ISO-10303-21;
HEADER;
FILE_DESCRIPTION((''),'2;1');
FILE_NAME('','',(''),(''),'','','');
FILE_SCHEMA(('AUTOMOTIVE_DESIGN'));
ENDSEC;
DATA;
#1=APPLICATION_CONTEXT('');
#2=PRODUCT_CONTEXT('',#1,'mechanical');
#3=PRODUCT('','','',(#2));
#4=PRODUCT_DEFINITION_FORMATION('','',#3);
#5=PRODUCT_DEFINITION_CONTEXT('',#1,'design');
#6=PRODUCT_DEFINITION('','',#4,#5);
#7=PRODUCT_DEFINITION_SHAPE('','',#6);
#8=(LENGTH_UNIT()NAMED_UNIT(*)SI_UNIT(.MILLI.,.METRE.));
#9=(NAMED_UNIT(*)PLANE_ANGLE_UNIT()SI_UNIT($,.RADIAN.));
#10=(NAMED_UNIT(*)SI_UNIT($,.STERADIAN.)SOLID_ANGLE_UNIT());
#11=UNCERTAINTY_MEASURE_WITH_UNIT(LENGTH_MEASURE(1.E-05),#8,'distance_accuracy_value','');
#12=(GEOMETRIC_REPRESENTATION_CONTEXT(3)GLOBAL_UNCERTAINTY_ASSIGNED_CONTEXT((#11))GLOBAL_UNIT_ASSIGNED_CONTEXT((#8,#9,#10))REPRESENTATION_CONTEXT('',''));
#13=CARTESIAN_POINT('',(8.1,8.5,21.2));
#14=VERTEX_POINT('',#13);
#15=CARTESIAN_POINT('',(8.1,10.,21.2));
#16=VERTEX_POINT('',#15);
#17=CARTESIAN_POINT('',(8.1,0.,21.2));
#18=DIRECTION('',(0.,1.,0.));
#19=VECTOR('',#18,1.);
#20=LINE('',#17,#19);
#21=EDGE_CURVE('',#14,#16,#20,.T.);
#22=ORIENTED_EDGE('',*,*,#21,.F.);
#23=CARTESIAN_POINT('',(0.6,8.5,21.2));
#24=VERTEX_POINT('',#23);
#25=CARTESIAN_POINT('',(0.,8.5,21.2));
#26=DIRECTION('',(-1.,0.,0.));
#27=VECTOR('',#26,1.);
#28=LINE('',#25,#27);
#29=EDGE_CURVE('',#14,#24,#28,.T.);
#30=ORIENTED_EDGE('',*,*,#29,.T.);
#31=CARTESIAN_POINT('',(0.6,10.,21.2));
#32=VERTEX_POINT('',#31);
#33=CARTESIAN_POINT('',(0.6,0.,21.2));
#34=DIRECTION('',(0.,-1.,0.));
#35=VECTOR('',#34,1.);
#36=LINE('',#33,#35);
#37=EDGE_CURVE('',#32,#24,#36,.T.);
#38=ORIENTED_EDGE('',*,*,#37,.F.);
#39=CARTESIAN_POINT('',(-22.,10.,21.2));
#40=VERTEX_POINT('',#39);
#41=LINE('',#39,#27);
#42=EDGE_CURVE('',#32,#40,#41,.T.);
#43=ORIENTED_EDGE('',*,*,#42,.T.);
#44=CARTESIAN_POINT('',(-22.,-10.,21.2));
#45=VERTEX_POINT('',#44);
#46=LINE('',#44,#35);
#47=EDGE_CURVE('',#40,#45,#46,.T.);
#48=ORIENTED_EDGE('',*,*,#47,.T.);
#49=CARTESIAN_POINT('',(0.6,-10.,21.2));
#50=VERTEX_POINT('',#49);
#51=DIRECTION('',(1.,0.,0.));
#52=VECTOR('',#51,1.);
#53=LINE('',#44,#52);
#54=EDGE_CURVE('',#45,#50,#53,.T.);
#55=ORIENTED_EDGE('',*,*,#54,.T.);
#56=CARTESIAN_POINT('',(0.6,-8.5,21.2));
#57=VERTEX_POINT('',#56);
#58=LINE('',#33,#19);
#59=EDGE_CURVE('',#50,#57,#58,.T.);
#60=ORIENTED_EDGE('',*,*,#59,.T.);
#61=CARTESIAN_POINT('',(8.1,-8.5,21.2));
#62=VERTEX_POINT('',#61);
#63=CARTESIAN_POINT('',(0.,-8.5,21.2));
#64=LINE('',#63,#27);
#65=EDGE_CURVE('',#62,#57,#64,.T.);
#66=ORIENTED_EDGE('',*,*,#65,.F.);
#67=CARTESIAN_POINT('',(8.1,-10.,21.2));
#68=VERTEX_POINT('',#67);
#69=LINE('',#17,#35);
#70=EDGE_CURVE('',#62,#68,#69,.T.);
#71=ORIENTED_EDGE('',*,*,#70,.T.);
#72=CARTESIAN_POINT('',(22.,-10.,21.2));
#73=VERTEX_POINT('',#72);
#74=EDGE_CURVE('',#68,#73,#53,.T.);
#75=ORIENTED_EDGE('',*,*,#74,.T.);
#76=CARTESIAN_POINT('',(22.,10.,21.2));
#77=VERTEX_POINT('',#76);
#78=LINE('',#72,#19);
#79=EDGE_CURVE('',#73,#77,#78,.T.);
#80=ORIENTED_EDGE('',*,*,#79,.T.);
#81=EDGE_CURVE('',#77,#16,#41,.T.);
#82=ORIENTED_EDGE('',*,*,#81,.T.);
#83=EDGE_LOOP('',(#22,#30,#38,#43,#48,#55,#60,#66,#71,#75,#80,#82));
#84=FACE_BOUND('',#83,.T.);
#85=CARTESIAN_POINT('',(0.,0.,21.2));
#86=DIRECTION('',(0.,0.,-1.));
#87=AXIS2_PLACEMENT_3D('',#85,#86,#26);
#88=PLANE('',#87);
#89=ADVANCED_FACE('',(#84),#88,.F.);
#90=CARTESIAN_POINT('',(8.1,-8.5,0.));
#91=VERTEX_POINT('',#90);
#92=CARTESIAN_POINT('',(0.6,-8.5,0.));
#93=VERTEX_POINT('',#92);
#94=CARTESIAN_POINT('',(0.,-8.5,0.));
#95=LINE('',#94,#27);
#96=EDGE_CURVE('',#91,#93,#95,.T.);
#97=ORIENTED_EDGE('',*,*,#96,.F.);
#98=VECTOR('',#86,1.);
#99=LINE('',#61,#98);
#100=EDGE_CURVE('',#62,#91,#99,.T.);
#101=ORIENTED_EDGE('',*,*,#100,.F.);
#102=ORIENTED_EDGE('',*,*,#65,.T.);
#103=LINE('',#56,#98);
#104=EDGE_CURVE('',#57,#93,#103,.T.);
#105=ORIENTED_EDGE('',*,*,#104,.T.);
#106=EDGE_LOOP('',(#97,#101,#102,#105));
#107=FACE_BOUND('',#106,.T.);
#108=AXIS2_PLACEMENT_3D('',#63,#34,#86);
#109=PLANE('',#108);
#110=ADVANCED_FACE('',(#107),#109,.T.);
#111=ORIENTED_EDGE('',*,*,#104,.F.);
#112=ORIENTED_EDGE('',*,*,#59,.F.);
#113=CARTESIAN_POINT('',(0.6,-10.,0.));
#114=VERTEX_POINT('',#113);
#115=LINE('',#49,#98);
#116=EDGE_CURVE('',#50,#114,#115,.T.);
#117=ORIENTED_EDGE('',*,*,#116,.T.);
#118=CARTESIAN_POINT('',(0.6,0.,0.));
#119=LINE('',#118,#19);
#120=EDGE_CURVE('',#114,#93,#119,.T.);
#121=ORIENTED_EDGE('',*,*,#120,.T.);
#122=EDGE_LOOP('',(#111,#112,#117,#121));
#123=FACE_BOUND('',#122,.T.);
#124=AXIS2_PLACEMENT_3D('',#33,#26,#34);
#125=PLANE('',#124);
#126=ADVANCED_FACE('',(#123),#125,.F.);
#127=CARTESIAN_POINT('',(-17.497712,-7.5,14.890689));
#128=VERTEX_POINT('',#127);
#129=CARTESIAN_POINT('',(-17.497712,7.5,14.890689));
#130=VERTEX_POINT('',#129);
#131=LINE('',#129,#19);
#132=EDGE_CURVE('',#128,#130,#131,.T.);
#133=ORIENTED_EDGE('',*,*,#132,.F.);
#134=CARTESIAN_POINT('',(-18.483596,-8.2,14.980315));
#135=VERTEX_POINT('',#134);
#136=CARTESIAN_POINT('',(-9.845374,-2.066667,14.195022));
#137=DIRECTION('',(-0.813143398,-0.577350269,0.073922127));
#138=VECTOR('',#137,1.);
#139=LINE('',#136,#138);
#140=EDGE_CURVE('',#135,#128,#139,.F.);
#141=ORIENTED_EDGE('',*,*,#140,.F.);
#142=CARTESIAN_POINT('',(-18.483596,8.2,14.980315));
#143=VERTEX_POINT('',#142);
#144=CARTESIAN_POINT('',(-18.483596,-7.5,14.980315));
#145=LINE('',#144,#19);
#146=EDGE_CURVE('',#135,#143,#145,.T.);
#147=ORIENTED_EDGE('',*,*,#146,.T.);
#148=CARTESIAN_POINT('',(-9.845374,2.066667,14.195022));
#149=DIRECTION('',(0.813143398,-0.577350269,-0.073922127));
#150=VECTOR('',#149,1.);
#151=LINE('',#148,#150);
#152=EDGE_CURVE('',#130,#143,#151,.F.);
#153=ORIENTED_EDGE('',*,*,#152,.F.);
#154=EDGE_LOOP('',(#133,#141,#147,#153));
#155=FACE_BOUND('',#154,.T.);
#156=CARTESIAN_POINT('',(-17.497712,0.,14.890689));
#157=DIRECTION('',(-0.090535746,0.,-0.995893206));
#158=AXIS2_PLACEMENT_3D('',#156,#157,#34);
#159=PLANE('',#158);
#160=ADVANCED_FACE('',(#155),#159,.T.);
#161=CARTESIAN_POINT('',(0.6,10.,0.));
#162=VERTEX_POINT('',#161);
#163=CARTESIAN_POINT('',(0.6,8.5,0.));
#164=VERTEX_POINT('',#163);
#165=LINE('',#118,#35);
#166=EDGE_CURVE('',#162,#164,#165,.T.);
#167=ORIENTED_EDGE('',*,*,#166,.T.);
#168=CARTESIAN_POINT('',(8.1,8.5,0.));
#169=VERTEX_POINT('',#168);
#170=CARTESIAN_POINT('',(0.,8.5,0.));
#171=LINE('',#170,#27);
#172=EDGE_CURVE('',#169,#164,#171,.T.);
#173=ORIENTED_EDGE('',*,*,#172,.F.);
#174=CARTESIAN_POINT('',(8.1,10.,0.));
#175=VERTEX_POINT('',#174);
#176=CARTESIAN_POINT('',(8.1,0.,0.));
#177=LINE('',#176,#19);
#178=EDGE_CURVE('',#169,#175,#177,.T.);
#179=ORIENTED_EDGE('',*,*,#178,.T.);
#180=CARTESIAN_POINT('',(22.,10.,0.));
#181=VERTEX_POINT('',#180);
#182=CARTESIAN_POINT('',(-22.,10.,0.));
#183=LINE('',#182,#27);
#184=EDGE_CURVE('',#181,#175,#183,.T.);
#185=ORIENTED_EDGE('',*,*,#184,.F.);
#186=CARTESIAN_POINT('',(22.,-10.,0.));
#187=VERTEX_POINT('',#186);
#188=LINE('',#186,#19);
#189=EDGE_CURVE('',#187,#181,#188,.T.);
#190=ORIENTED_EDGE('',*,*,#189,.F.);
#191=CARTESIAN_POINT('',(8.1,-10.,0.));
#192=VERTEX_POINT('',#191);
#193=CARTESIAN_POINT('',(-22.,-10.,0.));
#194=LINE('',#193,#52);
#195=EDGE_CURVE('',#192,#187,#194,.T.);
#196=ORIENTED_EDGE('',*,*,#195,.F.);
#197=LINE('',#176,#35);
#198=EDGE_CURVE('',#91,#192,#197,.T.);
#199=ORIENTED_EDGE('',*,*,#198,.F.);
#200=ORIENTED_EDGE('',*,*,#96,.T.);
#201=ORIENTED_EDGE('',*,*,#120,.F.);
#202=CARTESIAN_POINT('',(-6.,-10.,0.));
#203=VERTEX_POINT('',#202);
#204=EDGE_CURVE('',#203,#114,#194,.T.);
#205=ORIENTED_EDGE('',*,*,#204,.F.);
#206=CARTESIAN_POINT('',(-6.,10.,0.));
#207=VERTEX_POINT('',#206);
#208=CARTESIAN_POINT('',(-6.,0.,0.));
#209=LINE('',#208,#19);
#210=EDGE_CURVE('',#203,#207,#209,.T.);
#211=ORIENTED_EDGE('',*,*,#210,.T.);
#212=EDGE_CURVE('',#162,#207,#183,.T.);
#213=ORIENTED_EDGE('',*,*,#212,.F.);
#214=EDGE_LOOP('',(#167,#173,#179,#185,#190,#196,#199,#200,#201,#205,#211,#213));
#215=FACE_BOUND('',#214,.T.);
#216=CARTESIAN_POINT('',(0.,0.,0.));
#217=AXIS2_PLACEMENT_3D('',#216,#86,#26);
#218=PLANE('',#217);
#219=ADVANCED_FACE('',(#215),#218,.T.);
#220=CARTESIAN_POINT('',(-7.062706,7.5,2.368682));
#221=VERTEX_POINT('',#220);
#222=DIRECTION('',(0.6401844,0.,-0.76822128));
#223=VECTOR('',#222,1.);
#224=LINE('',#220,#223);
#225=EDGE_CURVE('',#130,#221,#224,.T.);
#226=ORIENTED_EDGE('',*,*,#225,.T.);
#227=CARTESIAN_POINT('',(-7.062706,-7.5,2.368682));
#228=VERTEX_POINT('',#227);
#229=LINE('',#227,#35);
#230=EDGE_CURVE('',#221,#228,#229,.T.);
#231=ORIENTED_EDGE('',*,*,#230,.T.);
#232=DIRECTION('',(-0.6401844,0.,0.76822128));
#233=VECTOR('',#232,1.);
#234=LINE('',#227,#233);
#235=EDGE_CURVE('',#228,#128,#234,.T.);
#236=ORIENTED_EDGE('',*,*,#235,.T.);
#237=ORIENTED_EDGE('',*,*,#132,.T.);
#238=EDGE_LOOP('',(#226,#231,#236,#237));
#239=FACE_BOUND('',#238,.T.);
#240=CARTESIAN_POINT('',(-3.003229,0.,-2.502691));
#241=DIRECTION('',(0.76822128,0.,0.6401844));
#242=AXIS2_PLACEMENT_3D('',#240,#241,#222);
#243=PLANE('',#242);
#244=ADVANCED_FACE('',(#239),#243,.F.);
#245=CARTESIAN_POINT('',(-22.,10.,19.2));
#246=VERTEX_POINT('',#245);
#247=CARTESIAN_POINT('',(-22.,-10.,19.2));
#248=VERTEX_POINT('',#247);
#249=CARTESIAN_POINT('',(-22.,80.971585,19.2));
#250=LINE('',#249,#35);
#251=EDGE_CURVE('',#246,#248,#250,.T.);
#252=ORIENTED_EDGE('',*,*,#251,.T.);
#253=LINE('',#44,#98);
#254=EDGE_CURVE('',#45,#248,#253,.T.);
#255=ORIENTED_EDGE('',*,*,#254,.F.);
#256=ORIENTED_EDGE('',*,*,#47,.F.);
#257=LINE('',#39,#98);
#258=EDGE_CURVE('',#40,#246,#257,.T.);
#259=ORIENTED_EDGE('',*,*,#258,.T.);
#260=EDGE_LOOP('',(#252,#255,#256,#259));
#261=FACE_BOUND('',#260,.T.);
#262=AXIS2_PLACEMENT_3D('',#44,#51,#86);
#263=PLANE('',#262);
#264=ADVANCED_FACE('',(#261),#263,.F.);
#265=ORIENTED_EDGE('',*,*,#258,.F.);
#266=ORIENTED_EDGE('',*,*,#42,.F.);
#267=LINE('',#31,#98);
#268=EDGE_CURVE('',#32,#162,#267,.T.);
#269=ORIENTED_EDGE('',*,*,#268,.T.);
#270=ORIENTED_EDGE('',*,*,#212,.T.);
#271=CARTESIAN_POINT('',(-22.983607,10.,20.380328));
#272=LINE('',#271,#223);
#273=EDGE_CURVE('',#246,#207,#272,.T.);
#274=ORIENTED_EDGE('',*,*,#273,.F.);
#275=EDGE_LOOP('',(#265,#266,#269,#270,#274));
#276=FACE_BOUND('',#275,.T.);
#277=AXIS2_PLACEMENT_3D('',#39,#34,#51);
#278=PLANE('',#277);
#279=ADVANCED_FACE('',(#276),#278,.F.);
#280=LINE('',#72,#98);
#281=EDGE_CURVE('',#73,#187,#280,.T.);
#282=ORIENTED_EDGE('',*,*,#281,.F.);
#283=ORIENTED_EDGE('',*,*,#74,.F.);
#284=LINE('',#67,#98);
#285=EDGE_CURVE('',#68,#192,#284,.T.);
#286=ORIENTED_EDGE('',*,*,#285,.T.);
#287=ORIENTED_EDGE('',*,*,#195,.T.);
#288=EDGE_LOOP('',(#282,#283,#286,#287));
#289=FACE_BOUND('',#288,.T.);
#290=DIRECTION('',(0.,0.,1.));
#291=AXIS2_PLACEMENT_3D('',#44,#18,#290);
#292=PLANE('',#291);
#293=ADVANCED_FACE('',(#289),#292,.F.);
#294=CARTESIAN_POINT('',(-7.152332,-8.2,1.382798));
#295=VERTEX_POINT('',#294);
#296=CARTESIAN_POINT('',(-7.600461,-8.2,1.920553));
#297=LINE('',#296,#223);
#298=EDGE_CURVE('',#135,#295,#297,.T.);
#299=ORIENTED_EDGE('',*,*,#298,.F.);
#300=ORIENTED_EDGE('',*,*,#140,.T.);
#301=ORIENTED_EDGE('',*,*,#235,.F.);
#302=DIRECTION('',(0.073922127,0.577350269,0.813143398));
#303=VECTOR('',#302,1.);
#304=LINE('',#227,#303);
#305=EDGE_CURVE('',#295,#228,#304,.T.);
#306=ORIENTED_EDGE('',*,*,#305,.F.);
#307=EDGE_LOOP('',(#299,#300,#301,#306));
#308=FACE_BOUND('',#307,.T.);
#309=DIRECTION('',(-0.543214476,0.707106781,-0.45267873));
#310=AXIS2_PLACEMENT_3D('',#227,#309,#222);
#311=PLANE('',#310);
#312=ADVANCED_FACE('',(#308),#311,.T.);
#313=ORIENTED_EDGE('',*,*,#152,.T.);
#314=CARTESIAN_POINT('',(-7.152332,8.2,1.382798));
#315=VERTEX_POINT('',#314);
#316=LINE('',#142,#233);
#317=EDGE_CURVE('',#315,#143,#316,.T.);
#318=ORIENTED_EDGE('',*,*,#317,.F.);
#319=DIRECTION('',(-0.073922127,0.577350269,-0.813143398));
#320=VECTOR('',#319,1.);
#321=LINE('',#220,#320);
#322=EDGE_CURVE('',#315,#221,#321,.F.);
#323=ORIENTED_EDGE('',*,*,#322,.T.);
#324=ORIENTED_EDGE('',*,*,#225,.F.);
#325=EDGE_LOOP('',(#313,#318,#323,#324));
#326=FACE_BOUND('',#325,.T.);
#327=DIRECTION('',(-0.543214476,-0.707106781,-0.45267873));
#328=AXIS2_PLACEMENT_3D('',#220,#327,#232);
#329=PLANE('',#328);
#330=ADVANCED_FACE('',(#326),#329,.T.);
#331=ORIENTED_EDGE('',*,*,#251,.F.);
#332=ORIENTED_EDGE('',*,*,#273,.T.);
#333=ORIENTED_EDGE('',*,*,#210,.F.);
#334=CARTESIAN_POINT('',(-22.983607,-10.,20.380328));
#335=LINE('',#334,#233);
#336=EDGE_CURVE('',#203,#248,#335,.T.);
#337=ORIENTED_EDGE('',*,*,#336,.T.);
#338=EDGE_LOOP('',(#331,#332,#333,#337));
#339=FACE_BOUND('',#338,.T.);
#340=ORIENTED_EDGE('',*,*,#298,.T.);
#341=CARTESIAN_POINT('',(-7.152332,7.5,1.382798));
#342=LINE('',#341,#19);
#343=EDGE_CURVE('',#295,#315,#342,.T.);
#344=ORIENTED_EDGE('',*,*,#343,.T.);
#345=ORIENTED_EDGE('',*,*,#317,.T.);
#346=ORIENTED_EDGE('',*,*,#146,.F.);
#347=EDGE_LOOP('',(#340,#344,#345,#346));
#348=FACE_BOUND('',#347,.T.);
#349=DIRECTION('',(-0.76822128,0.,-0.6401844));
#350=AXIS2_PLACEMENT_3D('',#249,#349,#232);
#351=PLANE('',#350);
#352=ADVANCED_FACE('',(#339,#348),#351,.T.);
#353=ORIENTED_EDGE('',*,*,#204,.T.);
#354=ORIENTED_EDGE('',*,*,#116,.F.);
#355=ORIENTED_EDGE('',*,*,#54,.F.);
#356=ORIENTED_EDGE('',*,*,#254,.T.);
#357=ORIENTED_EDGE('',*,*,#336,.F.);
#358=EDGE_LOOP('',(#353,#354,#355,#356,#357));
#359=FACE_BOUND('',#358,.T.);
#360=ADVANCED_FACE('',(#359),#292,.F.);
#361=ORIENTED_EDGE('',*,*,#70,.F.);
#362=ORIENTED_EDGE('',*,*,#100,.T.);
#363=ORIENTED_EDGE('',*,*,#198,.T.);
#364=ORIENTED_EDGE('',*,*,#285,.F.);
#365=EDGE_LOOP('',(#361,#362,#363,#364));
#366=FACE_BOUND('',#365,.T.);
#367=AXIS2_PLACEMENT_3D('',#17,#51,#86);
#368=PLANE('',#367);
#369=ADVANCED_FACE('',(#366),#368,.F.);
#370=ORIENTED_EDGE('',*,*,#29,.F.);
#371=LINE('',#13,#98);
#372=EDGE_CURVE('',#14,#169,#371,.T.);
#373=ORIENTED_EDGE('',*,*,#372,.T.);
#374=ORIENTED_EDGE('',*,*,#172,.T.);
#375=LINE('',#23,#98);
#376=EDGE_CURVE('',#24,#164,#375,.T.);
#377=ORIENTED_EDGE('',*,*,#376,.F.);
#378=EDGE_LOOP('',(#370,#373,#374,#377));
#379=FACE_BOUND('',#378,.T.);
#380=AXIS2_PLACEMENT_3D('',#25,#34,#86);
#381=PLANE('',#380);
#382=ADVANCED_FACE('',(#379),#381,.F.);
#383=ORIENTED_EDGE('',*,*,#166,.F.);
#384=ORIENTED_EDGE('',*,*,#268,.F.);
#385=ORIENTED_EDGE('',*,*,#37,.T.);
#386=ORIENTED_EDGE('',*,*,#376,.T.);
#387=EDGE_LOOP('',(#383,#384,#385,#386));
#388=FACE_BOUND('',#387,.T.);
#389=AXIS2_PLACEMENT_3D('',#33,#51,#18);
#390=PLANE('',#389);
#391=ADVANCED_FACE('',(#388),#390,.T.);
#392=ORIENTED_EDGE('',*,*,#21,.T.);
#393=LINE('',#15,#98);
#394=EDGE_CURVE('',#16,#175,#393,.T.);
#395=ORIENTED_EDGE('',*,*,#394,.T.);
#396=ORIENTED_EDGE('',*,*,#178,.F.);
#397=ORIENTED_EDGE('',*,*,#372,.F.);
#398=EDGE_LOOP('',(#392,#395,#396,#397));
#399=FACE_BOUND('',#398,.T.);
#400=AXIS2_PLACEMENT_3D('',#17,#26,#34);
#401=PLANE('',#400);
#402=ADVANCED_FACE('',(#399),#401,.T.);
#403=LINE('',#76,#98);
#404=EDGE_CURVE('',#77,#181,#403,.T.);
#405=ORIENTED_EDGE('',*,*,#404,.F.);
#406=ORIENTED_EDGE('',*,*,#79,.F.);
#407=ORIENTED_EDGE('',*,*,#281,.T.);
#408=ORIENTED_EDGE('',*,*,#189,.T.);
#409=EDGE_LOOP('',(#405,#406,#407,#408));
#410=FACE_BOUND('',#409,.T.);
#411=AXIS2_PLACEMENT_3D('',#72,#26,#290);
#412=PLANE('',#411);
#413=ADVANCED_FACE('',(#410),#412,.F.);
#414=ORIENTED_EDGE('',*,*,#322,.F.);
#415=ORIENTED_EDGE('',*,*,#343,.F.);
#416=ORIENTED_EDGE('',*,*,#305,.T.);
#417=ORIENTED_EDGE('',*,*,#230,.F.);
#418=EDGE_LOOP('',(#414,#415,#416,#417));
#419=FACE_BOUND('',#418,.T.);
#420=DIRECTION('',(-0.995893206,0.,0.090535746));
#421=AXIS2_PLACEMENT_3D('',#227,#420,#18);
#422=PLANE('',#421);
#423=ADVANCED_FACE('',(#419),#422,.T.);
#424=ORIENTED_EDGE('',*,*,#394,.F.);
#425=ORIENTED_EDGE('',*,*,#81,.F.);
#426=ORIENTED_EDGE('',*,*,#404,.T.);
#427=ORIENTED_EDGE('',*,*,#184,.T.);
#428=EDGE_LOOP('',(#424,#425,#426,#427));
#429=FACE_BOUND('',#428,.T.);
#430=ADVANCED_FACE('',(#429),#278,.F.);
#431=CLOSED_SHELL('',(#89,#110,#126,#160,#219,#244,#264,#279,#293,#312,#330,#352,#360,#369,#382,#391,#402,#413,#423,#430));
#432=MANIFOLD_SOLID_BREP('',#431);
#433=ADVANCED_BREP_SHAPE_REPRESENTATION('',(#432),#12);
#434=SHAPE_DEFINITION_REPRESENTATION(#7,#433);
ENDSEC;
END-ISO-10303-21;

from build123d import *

# Parameters (mm, degrees)
SKETCH1_W               = 44
SKETCH1_H               = 20
BOSS_EXTRUDE1_DEPTH     = 21.2
CUT_EXTRUDE1_DEPTH      = 32.771685508
CUT_EXTRUDE1_DEPTH_BACK = 32.771685508
SKETCH4_W               = 17
SKETCH4_H               = 15
CUT_EXTRUDE3_DEPTH      = 0.7
CHAMFER3_SIZE           = 0.7
CHAMFER4_SIZE           = 0.7
SKETCH5_W               = 7.5
SKETCH5_H               = 1.5
CUT_EXTRUDE4_DEPTH      = 33.147161617


with BuildPart() as part:
    # Sketch1 → Boss-Extrude1 (new body)
    with BuildSketch(Plane.XY):
        Rectangle(SKETCH1_W, SKETCH1_H)
    extrude(amount=BOSS_EXTRUDE1_DEPTH)

    # Sketch2 → Cut-Extrude1 (cut, two sides: drawn at the far end of the back side and taken through both)
    with BuildSketch(Plane(origin=(0, -10, 11.2), x_dir=(1, 0, 0), z_dir=(0, 1, 0)).offset(-CUT_EXTRUDE1_DEPTH_BACK)):
        Polygon((-89.868081564, -89.441697876), (-22, -8), (-6, 11.2), (61.868081564, 92.641697876), (-101.015314189, 228.377861004), (-252.751477317, 46.294465251), align=None)
    extrude(amount=CUT_EXTRUDE1_DEPTH + CUT_EXTRUDE1_DEPTH_BACK, mode=Mode.SUBTRACT)

    # Sketch4 → Cut-Extrude3 (cut)
    with BuildSketch(Plane(origin=(-3.540983607, 0, -2.950819672), x_dir=(-0.6401843996644798, 0, 0.7682212795973761), z_dir=(-0.7682212795973761, 0, -0.6401843996644798))):
        with Locations((14.841106398, 0)):
            Rectangle(SKETCH4_W, SKETCH4_H)
    extrude(amount=-CUT_EXTRUDE3_DEPTH, mode=Mode.SUBTRACT)

    # Chamfer3
    chamfer3_edges = [part.edges().sort_by_distance(p)[0] for p in [
        (-13.042028396, 7.5, 8.450434076),
        (-13.042028396, -7.5, 8.450434076),
        (-7.600460999, 0, 1.920553199),
    ]]
    chamfer(chamfer3_edges, length=CHAMFER3_SIZE - 0.0001)  # a hair under: the kernel refuses the full size

    # Chamfer4
    chamfer4_edges = [part.edges().sort_by_distance(p)[0] for p in [
        (-17.945840898, 0, 15.428444032),
    ]]
    chamfer(chamfer4_edges, length=CHAMFER4_SIZE - 0.0001)  # a hair under: the kernel refuses the full size

    # Sketch5 → Cut-Extrude4 (cut, through all)
    with BuildSketch(Plane(origin=(0, 0, 0), x_dir=(-1, 0, 0), z_dir=(0, 0, -1))):
        with Locations((-4.35, 9.25)):
            Rectangle(SKETCH5_W, SKETCH5_H)
        with Locations((-4.35, -9.25)):
            Rectangle(SKETCH5_W, SKETCH5_H)
    extrude(amount=-CUT_EXTRUDE4_DEPTH, mode=Mode.SUBTRACT)


solid = part.part
